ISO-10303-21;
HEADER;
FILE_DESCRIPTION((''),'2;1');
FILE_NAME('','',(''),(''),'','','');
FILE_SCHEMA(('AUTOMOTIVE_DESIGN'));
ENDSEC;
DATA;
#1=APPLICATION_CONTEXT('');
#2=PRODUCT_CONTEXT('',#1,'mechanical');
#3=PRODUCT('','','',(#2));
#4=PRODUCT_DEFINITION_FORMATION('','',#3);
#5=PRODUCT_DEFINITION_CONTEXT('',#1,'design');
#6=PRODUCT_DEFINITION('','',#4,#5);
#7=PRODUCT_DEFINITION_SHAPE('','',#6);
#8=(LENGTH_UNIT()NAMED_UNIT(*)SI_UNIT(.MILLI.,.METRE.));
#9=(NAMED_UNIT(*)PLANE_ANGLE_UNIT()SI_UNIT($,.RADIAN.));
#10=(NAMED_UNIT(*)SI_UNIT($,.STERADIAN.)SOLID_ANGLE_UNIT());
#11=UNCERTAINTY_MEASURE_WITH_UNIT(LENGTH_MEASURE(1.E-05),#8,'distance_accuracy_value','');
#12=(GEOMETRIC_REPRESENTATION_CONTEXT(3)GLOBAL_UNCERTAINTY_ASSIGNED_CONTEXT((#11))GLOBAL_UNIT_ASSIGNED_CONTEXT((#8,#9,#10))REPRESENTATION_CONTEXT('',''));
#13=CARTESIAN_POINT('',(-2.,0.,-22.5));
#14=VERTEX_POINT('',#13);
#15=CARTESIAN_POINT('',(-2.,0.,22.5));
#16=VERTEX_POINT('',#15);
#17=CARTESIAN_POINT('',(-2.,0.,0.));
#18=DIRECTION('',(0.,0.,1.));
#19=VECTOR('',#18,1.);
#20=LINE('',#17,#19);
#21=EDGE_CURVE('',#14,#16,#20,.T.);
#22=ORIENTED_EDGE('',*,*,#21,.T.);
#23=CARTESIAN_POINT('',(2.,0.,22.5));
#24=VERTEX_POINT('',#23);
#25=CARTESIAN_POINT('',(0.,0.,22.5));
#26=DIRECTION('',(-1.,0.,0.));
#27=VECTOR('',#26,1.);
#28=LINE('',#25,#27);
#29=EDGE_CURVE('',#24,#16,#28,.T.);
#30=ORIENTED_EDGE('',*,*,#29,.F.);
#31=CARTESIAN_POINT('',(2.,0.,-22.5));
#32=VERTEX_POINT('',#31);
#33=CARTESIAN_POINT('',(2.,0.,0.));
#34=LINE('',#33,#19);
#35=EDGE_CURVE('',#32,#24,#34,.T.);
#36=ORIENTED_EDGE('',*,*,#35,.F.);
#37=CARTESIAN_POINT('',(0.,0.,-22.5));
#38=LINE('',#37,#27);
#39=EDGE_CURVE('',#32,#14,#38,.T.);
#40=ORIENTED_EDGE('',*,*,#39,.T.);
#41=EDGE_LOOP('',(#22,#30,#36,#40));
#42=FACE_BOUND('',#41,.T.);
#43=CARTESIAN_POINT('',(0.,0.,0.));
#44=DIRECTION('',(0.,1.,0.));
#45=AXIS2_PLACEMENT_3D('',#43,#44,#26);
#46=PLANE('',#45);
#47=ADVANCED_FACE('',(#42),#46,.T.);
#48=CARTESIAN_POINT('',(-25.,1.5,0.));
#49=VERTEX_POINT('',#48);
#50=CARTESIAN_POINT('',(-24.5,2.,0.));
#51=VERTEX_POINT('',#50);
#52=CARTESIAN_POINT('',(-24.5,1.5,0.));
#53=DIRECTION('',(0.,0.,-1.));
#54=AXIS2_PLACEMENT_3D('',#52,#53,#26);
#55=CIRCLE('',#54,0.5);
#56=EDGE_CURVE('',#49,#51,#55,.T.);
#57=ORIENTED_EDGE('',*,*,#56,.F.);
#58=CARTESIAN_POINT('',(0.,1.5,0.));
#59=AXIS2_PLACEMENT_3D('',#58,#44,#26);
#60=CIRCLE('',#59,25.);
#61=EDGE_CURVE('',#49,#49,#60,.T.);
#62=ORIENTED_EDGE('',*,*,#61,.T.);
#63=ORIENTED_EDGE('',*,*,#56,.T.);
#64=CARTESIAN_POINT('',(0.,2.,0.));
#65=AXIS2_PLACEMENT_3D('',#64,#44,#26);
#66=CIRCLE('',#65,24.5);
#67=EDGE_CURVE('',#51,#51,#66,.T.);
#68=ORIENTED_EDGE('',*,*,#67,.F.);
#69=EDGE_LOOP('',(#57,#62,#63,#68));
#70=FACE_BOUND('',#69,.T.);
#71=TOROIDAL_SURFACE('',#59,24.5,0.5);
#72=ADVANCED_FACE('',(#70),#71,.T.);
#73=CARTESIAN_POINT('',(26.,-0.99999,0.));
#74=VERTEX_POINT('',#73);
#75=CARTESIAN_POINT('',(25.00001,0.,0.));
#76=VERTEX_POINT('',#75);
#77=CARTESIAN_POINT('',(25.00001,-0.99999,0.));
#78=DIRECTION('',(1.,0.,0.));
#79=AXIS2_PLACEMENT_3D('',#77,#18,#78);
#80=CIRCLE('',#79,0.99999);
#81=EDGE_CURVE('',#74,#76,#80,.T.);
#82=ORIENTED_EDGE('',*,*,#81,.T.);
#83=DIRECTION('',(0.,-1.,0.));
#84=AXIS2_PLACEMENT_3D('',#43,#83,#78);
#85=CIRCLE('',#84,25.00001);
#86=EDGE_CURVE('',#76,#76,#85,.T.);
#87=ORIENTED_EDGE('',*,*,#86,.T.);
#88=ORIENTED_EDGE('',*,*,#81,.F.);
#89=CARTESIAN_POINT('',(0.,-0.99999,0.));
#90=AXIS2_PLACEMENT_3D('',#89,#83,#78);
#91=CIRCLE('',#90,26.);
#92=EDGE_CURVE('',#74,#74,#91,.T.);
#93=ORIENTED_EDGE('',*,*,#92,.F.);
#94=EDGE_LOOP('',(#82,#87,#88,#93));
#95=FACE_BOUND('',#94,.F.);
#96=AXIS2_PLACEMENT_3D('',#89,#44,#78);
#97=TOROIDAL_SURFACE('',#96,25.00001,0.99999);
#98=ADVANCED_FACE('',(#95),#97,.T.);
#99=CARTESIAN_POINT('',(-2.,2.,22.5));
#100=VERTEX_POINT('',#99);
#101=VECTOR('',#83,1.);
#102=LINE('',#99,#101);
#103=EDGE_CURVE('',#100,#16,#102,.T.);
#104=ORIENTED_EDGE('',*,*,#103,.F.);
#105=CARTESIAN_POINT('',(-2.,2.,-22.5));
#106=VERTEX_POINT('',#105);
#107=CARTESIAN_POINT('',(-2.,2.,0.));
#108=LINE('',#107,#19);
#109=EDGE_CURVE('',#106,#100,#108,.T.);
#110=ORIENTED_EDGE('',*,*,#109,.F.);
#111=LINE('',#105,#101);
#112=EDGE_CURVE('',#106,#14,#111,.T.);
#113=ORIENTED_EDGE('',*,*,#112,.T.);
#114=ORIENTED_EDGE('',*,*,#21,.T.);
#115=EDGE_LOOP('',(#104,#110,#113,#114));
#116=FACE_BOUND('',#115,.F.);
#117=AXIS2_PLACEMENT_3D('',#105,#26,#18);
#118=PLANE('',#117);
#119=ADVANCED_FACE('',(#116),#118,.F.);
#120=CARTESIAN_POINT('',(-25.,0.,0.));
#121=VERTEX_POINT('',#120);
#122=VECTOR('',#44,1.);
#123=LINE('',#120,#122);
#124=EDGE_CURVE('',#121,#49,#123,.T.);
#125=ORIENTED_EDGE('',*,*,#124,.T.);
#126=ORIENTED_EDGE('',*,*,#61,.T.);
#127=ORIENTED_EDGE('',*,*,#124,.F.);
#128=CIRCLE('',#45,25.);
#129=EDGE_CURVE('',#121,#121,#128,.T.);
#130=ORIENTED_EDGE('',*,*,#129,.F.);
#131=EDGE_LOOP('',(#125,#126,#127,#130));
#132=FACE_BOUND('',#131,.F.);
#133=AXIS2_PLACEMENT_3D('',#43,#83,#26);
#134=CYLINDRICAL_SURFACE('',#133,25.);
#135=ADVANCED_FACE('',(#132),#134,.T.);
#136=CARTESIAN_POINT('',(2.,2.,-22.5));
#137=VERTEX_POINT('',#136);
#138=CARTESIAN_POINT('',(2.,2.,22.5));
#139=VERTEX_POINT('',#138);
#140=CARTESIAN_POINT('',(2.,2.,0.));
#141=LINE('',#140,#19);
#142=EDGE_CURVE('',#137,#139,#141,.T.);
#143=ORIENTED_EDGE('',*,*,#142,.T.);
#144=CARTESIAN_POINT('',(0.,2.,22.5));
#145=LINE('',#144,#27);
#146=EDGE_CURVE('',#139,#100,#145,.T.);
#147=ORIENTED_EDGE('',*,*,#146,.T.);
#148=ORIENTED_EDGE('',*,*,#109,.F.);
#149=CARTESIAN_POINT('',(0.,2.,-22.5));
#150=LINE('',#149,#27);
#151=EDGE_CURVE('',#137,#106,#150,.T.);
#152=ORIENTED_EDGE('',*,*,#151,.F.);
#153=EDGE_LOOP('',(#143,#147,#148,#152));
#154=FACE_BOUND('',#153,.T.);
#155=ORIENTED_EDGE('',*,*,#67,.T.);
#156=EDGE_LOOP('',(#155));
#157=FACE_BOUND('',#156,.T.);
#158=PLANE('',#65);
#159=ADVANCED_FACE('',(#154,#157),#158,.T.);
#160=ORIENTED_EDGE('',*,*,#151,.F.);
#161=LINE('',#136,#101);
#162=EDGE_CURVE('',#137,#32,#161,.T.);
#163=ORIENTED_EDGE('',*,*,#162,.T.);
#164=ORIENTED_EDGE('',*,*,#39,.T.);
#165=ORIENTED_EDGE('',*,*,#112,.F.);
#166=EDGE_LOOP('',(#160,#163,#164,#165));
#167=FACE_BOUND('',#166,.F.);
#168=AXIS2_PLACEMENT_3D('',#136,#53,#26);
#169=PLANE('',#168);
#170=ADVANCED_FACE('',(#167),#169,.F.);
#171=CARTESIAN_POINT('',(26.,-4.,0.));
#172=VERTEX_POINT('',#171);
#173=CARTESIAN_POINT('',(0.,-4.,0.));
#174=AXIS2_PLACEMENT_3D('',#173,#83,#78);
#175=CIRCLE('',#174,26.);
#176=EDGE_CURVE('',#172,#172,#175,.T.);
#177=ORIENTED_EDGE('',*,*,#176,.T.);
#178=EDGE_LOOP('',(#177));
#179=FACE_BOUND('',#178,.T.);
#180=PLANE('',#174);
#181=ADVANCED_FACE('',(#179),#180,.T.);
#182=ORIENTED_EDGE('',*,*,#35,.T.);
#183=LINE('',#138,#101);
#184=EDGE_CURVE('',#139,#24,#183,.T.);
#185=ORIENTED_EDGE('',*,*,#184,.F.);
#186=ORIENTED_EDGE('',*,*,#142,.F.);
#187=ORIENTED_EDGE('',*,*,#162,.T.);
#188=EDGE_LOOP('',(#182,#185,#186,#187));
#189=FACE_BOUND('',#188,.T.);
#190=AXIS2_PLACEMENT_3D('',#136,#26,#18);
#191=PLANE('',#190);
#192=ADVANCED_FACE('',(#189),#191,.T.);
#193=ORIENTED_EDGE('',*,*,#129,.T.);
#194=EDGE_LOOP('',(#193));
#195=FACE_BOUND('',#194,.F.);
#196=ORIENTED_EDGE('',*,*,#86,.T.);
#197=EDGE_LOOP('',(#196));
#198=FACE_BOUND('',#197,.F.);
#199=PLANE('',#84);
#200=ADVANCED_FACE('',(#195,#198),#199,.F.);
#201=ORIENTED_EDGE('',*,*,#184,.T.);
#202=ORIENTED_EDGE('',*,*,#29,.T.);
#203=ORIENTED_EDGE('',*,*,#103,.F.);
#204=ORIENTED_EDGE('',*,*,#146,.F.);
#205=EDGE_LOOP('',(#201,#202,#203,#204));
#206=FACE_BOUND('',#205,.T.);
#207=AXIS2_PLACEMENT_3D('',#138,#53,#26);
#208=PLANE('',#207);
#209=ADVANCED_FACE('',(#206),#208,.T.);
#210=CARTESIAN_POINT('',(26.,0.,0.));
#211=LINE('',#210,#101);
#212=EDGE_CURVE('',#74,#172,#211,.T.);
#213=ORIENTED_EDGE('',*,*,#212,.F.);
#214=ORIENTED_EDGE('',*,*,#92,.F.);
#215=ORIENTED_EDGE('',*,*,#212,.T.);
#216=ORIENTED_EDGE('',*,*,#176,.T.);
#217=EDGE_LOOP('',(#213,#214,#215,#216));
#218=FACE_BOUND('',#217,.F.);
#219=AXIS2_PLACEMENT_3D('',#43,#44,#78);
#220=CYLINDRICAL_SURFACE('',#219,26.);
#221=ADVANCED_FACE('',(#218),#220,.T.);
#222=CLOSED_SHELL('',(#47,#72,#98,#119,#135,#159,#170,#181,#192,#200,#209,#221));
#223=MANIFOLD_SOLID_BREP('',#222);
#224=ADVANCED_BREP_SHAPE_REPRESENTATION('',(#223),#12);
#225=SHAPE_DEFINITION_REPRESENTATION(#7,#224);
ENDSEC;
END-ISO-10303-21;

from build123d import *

# Parameters (mm, degrees)
F0_R     = 26
F1_DEPTH = 4
F2_R     = 25
F3_DEPTH = 2
F4_R     = 0.99999
F5_R     = 0.5
F6_W     = 4
F6_H     = 45
F7_DEPTH = 2


# Not quite as in the source:
# - a fillet or chamfer is up to 0.001 mm smaller than in the source, because OpenCascade refuses the exact size


with BuildPart() as f1:
    # F0 (on Front) → F1 (new body)
    with BuildSketch(Plane.XZ):
        Circle(F0_R)
    extrude(amount=F1_DEPTH)

    # F2 (on face) → F3 (join)
    with BuildSketch(Plane(origin=(0, 0, 0), x_dir=(-1, 0, 0), z_dir=(0, 1, 0))):
        Circle(F2_R)
    extrude(amount=F3_DEPTH)

    # F4 (radius 1 in the source; OpenCascade refuses exactly that, so slightly less here)
    f4_edges = [f1.edges().sort_by_distance(p)[0] for p in [
        (-26, 0, 0),
    ]]
    fillet(f4_edges, radius=F4_R)

    # F5
    f5_edges = [f1.edges().sort_by_distance(p)[0] for p in [
        (25, 2, 0),
    ]]
    fillet(f5_edges, radius=F5_R)

    # F6 (on face) → F7 (cut)
    with BuildSketch(Plane(origin=(0, 2, 0), x_dir=(-1, 0, 0), z_dir=(0, 1, 0))):
        Rectangle(F6_W, F6_H)
    extrude(amount=-F7_DEPTH, mode=Mode.SUBTRACT)


solid = f1.part
